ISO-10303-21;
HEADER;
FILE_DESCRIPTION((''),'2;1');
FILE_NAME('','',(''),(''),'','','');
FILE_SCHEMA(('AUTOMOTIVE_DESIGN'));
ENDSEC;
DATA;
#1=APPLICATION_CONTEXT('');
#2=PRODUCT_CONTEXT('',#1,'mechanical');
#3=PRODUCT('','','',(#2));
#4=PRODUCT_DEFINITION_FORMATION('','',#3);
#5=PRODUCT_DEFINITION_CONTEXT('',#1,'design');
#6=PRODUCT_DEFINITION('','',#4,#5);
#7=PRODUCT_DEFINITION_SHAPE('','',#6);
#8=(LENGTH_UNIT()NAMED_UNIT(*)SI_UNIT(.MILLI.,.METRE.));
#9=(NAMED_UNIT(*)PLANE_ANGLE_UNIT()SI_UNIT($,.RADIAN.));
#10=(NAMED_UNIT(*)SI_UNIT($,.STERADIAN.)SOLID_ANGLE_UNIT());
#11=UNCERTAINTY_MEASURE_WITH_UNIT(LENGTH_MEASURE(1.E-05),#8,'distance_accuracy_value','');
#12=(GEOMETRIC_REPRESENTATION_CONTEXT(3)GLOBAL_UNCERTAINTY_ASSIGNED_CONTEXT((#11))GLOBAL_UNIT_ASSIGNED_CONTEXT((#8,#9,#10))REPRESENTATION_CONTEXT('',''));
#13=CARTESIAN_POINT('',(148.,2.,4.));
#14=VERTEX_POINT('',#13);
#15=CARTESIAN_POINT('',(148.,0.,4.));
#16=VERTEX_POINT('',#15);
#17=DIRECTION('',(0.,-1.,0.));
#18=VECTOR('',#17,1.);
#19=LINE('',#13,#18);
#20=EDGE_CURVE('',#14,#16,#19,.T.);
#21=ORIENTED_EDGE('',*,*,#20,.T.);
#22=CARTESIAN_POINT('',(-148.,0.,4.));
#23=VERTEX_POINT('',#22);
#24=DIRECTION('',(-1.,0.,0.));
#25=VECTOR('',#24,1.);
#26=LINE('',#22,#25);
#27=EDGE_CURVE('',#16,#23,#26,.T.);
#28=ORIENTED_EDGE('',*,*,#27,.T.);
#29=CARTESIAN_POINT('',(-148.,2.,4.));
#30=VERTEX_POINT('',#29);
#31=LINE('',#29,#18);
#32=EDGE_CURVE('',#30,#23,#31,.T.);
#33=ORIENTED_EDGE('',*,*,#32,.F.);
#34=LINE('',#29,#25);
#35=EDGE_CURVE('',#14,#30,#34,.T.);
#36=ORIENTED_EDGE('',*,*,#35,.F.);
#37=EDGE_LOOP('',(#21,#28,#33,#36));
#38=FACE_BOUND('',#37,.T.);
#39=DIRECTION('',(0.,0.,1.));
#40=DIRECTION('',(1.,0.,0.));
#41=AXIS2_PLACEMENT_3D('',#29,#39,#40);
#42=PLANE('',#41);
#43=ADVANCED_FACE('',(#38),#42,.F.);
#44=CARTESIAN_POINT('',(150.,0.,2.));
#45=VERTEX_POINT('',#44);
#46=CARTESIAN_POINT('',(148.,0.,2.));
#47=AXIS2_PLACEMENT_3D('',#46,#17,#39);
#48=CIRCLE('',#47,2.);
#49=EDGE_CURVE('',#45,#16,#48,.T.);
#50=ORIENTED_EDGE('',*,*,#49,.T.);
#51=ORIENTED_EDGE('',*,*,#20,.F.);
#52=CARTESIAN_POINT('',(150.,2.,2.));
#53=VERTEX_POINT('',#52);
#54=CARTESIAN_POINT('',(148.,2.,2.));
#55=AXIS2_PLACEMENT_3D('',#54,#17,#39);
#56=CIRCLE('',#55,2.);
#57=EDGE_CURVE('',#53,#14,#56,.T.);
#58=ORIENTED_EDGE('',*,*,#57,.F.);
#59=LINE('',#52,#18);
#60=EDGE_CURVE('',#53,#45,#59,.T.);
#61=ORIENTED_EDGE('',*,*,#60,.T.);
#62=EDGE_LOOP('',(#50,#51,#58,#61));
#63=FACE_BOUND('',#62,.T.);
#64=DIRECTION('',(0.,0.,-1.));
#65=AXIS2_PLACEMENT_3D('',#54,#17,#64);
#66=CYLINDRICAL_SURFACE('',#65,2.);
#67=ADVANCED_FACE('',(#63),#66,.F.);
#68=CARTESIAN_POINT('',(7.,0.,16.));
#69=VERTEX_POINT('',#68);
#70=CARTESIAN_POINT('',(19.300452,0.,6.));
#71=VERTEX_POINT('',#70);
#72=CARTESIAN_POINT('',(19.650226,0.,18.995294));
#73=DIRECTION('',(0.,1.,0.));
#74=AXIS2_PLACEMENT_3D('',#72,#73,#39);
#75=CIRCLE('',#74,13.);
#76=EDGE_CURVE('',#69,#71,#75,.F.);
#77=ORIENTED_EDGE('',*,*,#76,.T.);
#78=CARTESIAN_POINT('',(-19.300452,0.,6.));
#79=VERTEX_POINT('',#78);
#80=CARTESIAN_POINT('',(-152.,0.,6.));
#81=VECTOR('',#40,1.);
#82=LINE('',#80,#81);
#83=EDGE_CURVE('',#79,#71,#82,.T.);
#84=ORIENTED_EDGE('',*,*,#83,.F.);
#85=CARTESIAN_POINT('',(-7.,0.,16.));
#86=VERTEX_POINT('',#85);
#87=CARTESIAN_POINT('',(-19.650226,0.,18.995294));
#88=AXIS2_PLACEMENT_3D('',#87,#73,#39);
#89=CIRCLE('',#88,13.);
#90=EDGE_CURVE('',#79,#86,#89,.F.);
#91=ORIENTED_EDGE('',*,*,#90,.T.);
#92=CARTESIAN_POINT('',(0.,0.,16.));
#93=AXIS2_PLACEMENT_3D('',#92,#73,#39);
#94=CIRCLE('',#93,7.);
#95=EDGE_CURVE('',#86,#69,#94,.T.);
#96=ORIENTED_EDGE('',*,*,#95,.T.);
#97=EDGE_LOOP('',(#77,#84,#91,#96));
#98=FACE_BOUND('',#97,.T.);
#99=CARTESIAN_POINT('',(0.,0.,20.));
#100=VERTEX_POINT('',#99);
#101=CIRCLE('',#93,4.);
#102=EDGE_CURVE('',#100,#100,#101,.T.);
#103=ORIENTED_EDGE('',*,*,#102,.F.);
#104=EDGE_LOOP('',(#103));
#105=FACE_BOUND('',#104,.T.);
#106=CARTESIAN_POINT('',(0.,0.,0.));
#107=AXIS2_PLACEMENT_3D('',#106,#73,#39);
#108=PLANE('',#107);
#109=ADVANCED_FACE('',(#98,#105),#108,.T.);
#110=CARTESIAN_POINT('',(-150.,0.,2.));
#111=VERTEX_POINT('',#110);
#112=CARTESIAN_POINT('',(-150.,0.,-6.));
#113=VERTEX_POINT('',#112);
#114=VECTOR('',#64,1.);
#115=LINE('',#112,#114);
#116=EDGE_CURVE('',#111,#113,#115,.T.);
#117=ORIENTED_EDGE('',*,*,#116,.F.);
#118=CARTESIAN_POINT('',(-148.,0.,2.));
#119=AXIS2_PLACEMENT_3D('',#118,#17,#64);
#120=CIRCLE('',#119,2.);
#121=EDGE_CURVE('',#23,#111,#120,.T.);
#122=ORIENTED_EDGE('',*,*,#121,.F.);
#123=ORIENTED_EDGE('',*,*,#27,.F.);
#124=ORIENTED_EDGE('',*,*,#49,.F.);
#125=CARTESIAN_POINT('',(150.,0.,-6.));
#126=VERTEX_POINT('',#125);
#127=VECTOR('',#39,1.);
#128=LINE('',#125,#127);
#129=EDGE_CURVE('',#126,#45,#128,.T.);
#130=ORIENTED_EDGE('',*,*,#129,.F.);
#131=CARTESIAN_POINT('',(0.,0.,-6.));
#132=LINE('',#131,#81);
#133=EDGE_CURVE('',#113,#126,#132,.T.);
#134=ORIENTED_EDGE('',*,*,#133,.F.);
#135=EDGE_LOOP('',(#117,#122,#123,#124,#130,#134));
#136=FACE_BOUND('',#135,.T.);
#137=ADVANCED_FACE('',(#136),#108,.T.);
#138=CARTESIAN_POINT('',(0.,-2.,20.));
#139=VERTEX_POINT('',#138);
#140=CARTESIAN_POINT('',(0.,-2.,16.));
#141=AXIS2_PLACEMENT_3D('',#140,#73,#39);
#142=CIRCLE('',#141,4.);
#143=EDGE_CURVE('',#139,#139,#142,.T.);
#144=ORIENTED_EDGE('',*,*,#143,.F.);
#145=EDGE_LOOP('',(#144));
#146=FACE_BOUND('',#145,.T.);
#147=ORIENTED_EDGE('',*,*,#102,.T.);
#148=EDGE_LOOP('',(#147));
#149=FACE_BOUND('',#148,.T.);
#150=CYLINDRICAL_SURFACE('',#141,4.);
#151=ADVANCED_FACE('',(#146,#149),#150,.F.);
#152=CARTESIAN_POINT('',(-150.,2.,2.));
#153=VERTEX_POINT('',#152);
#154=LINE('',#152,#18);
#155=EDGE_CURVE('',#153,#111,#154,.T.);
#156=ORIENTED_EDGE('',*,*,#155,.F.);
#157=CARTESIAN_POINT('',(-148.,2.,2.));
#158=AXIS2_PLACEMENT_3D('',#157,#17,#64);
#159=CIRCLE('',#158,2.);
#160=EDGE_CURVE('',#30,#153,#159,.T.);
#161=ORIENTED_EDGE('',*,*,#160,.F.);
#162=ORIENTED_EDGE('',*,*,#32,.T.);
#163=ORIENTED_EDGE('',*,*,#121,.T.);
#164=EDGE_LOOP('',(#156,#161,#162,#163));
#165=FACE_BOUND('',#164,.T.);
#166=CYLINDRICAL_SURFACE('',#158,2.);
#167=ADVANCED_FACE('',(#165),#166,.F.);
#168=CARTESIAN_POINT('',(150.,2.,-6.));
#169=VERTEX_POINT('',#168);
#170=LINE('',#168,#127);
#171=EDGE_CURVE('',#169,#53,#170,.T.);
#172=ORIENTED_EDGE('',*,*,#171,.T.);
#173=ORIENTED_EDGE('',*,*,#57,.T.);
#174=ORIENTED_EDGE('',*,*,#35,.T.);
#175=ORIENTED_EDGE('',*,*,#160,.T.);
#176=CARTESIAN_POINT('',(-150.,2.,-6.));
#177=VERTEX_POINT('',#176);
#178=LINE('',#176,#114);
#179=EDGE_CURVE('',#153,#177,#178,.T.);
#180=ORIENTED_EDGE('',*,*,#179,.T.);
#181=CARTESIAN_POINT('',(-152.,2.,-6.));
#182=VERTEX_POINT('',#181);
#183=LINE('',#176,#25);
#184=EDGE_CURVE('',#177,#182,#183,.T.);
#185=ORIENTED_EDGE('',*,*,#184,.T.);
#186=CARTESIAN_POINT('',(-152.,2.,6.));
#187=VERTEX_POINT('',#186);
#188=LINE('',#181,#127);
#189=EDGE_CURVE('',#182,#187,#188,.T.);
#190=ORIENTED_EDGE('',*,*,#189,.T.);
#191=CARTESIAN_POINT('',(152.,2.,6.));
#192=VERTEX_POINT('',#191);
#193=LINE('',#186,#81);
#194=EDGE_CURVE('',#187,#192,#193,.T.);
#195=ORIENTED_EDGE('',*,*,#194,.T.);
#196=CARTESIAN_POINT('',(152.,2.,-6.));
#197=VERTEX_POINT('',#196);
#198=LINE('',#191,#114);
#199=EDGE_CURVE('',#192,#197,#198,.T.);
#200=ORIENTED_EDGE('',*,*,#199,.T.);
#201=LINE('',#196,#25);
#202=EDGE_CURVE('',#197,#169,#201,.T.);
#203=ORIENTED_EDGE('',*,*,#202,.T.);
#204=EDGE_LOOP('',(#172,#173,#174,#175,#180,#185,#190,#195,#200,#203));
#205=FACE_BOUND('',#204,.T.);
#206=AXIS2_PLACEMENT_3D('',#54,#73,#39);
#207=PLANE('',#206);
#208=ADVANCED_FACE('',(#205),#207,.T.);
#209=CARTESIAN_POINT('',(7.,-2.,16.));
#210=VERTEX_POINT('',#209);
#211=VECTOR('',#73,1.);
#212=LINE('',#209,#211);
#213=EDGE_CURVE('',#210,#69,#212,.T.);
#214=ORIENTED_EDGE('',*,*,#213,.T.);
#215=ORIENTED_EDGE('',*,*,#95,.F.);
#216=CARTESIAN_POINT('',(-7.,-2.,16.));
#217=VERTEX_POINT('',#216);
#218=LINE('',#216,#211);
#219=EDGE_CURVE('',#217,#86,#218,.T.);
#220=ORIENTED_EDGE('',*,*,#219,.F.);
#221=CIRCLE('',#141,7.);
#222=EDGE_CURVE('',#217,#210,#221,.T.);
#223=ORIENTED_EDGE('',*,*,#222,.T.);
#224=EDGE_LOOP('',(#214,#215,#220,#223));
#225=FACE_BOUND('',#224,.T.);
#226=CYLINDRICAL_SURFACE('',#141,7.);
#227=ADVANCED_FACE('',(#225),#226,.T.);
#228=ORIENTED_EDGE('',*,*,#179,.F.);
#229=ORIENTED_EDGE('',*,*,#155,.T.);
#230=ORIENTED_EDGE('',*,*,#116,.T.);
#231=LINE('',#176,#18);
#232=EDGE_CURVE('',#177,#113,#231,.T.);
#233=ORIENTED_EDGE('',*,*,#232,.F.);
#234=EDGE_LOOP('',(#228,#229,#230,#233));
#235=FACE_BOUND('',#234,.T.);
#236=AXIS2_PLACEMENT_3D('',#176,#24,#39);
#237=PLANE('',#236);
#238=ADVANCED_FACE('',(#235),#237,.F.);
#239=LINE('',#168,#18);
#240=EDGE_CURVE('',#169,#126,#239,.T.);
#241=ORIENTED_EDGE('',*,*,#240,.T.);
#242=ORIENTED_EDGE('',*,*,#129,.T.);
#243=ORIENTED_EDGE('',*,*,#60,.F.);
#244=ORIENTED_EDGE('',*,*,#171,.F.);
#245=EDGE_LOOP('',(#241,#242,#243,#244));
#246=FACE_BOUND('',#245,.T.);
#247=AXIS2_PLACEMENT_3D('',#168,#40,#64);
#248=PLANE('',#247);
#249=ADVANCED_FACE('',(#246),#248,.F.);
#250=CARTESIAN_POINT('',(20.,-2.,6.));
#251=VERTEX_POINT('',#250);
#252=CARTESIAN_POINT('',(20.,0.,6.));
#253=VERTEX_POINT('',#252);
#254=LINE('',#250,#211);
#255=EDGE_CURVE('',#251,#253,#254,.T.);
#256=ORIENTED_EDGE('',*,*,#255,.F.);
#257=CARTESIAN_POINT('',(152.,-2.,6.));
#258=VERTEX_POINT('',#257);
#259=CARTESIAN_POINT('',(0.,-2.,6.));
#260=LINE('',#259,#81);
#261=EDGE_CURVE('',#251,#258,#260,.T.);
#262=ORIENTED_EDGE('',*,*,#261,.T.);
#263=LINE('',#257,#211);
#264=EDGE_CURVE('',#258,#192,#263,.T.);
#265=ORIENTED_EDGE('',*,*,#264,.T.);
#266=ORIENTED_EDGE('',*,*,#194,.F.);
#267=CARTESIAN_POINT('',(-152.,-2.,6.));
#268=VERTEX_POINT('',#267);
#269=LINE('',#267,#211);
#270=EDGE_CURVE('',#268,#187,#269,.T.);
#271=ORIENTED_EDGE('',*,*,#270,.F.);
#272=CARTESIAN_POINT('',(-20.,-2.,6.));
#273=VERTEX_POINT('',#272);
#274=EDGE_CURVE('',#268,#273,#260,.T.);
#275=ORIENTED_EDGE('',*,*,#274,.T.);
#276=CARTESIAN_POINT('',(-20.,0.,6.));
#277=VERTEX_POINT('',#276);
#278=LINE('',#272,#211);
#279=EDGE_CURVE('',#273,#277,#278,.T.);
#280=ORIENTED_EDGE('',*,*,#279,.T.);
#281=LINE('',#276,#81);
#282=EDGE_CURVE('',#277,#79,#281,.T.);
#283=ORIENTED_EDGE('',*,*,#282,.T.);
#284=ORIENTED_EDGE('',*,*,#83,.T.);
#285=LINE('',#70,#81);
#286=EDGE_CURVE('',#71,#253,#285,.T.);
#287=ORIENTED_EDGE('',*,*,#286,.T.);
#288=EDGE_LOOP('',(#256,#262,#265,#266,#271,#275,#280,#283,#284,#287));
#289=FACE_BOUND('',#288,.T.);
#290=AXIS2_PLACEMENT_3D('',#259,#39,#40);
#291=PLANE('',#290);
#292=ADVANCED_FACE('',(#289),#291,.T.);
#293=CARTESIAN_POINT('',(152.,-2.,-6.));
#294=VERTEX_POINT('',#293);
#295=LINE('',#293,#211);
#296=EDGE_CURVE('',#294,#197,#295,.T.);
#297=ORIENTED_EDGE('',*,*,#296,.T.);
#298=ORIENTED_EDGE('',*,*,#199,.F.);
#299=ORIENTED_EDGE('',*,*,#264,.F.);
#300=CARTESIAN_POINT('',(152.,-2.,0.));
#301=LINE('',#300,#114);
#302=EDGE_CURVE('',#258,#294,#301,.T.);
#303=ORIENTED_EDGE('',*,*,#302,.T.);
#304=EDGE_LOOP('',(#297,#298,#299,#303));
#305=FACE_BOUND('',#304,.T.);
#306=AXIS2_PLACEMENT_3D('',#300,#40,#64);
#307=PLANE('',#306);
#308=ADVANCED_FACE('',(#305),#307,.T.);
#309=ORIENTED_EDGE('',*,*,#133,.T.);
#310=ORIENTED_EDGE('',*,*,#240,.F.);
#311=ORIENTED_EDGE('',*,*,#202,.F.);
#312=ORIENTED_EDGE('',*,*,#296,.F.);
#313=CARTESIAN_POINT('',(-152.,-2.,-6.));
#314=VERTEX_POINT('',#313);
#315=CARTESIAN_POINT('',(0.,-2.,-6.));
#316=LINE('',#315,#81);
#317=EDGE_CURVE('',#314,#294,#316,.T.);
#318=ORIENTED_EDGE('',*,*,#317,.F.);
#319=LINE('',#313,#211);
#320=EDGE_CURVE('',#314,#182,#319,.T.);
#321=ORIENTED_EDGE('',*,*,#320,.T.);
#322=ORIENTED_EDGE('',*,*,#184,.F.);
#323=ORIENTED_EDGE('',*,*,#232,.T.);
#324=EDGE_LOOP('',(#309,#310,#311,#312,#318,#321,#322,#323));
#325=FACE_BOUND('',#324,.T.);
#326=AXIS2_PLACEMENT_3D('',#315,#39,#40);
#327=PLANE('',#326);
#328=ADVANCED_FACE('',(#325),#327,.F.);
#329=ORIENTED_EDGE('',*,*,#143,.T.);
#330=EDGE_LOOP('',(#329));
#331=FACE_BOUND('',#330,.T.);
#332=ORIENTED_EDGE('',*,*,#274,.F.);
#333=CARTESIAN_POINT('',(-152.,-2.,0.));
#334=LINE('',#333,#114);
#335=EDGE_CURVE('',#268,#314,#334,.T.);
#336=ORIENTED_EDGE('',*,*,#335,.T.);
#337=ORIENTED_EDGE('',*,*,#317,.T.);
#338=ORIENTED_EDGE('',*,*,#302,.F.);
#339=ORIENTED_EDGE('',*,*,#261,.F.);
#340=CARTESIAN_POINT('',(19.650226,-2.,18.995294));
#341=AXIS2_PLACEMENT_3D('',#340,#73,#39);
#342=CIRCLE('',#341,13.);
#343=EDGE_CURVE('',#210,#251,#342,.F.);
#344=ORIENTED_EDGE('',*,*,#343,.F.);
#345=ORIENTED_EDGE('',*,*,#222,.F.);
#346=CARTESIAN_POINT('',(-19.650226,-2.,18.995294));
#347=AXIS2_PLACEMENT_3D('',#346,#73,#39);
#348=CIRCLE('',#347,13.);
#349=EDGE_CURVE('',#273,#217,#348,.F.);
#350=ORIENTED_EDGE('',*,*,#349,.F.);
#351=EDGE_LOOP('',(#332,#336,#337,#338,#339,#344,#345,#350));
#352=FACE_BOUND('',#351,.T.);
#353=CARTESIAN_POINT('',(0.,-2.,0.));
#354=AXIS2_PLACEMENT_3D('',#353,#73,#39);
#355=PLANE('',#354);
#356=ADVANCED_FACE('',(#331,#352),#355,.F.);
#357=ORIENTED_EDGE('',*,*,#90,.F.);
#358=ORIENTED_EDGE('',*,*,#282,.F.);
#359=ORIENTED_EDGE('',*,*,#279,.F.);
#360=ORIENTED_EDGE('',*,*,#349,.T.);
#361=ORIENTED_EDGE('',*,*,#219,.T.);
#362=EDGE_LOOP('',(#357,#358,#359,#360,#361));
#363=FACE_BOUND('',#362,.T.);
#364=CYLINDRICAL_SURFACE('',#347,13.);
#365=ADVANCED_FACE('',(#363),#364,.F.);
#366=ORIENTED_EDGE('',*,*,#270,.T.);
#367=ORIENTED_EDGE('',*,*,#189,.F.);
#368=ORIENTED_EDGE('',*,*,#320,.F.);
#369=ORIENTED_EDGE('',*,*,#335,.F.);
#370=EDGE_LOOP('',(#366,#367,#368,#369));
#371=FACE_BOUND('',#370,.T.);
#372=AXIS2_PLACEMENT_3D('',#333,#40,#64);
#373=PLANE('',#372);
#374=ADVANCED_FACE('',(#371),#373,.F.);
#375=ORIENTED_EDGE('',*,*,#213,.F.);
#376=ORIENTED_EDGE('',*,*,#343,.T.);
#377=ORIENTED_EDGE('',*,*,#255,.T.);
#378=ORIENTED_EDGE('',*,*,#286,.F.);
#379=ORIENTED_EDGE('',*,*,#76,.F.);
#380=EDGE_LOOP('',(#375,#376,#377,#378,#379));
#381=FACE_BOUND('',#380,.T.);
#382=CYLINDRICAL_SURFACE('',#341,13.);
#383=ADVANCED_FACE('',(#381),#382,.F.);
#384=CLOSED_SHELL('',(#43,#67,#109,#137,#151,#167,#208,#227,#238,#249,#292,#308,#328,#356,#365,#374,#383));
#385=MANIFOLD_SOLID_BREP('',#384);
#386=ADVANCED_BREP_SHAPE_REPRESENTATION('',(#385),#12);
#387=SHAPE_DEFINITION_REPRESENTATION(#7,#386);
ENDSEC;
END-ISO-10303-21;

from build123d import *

# Parameters (mm, degrees)
SKETCH2_R           = 7
SKETCH2_R_2         = 4
BOSS_EXTRUDE2_DEPTH = 2
BOSS_EXTRUDE4_START = -2
BOSS_EXTRUDE4_DEPTH = 4


with BuildPart() as part:
    # Sketch2 → Boss-Extrude2 (new body)
    # profile 1 of 3: a face of its own
    with BuildSketch(Plane(origin=(0, 0, 0), x_dir=(1, 0, 0), z_dir=(0, 1, 0))):
        with BuildLine():
            Line((-152, 6), (-152, -6))
            Line((-152, -6), (-20, -6))
            ThreePointArc((-20, -6), (-19.650225915, -5.99529369), (-19.300451831, -6))
            Line((-19.300451831, -6), (19.300451831, -6))
            ThreePointArc((19.300451831, -6), (19.650225915, -5.99529369), (20, -6))
            Line((20, -6), (152, -6))
            Line((152, -6), (152, 6))
            Line((152, 6), (-152, 6))
        make_face()
    # profile 2 of 3: a face of its own
    with BuildSketch(Plane(origin=(0, 0, 0), x_dir=(1, 0, 0), z_dir=(0, 1, 0))):
        with BuildLine():
            Line((19.300451831, -6), (-19.300451831, -6))
            ThreePointArc((-19.300451831, -6), (-11.449616182, -8.908173189), (-7, -16))
            ThreePointArc((-7, -16), (0, -9), (7, -16))
            ThreePointArc((7, -16), (11.449616182, -8.908173189), (19.300451831, -6))
        make_face()
    # profile 3 of 3: a face of its own
    with BuildSketch(Plane(origin=(0, 0, 0), x_dir=(1, 0, 0), z_dir=(0, 1, 0))):
        with Locations((0, -16)):
            Circle(SKETCH2_R)
        with Locations(Location((0, -16, 0), (0, 0, 270))):
            Circle(SKETCH2_R_2, mode=Mode.SUBTRACT)
    extrude(amount=-BOSS_EXTRUDE2_DEPTH)

    # Boss-Extrude4: read off the stored shape, not the designer's step
    # Boss-Extrude4 outline → Boss-Extrude4 (add)
    with BuildSketch(Plane(origin=(0, 0, 0), x_dir=(1, 0, 0), z_dir=(0, 1, 0)).offset(BOSS_EXTRUDE4_START)):
        with BuildLine():
            Line((-152, 6), (-152, -6))
            Line((-152, -6), (152, -6))
            Line((152, -6), (152, 6))
            Line((152, 6), (150, 6))
            Line((150, 6), (150, -2))
            ThreePointArc((150, -2), (149.414213562, -3.414213562), (148, -4))
            Line((148, -4), (-148, -4))
            ThreePointArc((-148, -4), (-149.414213562, -3.414213562), (-150, -2))
            Line((-150, -2), (-150, 6))
            Line((-150, 6), (-152, 6))
        make_face()
    extrude(amount=BOSS_EXTRUDE4_DEPTH)


solid = part.part
